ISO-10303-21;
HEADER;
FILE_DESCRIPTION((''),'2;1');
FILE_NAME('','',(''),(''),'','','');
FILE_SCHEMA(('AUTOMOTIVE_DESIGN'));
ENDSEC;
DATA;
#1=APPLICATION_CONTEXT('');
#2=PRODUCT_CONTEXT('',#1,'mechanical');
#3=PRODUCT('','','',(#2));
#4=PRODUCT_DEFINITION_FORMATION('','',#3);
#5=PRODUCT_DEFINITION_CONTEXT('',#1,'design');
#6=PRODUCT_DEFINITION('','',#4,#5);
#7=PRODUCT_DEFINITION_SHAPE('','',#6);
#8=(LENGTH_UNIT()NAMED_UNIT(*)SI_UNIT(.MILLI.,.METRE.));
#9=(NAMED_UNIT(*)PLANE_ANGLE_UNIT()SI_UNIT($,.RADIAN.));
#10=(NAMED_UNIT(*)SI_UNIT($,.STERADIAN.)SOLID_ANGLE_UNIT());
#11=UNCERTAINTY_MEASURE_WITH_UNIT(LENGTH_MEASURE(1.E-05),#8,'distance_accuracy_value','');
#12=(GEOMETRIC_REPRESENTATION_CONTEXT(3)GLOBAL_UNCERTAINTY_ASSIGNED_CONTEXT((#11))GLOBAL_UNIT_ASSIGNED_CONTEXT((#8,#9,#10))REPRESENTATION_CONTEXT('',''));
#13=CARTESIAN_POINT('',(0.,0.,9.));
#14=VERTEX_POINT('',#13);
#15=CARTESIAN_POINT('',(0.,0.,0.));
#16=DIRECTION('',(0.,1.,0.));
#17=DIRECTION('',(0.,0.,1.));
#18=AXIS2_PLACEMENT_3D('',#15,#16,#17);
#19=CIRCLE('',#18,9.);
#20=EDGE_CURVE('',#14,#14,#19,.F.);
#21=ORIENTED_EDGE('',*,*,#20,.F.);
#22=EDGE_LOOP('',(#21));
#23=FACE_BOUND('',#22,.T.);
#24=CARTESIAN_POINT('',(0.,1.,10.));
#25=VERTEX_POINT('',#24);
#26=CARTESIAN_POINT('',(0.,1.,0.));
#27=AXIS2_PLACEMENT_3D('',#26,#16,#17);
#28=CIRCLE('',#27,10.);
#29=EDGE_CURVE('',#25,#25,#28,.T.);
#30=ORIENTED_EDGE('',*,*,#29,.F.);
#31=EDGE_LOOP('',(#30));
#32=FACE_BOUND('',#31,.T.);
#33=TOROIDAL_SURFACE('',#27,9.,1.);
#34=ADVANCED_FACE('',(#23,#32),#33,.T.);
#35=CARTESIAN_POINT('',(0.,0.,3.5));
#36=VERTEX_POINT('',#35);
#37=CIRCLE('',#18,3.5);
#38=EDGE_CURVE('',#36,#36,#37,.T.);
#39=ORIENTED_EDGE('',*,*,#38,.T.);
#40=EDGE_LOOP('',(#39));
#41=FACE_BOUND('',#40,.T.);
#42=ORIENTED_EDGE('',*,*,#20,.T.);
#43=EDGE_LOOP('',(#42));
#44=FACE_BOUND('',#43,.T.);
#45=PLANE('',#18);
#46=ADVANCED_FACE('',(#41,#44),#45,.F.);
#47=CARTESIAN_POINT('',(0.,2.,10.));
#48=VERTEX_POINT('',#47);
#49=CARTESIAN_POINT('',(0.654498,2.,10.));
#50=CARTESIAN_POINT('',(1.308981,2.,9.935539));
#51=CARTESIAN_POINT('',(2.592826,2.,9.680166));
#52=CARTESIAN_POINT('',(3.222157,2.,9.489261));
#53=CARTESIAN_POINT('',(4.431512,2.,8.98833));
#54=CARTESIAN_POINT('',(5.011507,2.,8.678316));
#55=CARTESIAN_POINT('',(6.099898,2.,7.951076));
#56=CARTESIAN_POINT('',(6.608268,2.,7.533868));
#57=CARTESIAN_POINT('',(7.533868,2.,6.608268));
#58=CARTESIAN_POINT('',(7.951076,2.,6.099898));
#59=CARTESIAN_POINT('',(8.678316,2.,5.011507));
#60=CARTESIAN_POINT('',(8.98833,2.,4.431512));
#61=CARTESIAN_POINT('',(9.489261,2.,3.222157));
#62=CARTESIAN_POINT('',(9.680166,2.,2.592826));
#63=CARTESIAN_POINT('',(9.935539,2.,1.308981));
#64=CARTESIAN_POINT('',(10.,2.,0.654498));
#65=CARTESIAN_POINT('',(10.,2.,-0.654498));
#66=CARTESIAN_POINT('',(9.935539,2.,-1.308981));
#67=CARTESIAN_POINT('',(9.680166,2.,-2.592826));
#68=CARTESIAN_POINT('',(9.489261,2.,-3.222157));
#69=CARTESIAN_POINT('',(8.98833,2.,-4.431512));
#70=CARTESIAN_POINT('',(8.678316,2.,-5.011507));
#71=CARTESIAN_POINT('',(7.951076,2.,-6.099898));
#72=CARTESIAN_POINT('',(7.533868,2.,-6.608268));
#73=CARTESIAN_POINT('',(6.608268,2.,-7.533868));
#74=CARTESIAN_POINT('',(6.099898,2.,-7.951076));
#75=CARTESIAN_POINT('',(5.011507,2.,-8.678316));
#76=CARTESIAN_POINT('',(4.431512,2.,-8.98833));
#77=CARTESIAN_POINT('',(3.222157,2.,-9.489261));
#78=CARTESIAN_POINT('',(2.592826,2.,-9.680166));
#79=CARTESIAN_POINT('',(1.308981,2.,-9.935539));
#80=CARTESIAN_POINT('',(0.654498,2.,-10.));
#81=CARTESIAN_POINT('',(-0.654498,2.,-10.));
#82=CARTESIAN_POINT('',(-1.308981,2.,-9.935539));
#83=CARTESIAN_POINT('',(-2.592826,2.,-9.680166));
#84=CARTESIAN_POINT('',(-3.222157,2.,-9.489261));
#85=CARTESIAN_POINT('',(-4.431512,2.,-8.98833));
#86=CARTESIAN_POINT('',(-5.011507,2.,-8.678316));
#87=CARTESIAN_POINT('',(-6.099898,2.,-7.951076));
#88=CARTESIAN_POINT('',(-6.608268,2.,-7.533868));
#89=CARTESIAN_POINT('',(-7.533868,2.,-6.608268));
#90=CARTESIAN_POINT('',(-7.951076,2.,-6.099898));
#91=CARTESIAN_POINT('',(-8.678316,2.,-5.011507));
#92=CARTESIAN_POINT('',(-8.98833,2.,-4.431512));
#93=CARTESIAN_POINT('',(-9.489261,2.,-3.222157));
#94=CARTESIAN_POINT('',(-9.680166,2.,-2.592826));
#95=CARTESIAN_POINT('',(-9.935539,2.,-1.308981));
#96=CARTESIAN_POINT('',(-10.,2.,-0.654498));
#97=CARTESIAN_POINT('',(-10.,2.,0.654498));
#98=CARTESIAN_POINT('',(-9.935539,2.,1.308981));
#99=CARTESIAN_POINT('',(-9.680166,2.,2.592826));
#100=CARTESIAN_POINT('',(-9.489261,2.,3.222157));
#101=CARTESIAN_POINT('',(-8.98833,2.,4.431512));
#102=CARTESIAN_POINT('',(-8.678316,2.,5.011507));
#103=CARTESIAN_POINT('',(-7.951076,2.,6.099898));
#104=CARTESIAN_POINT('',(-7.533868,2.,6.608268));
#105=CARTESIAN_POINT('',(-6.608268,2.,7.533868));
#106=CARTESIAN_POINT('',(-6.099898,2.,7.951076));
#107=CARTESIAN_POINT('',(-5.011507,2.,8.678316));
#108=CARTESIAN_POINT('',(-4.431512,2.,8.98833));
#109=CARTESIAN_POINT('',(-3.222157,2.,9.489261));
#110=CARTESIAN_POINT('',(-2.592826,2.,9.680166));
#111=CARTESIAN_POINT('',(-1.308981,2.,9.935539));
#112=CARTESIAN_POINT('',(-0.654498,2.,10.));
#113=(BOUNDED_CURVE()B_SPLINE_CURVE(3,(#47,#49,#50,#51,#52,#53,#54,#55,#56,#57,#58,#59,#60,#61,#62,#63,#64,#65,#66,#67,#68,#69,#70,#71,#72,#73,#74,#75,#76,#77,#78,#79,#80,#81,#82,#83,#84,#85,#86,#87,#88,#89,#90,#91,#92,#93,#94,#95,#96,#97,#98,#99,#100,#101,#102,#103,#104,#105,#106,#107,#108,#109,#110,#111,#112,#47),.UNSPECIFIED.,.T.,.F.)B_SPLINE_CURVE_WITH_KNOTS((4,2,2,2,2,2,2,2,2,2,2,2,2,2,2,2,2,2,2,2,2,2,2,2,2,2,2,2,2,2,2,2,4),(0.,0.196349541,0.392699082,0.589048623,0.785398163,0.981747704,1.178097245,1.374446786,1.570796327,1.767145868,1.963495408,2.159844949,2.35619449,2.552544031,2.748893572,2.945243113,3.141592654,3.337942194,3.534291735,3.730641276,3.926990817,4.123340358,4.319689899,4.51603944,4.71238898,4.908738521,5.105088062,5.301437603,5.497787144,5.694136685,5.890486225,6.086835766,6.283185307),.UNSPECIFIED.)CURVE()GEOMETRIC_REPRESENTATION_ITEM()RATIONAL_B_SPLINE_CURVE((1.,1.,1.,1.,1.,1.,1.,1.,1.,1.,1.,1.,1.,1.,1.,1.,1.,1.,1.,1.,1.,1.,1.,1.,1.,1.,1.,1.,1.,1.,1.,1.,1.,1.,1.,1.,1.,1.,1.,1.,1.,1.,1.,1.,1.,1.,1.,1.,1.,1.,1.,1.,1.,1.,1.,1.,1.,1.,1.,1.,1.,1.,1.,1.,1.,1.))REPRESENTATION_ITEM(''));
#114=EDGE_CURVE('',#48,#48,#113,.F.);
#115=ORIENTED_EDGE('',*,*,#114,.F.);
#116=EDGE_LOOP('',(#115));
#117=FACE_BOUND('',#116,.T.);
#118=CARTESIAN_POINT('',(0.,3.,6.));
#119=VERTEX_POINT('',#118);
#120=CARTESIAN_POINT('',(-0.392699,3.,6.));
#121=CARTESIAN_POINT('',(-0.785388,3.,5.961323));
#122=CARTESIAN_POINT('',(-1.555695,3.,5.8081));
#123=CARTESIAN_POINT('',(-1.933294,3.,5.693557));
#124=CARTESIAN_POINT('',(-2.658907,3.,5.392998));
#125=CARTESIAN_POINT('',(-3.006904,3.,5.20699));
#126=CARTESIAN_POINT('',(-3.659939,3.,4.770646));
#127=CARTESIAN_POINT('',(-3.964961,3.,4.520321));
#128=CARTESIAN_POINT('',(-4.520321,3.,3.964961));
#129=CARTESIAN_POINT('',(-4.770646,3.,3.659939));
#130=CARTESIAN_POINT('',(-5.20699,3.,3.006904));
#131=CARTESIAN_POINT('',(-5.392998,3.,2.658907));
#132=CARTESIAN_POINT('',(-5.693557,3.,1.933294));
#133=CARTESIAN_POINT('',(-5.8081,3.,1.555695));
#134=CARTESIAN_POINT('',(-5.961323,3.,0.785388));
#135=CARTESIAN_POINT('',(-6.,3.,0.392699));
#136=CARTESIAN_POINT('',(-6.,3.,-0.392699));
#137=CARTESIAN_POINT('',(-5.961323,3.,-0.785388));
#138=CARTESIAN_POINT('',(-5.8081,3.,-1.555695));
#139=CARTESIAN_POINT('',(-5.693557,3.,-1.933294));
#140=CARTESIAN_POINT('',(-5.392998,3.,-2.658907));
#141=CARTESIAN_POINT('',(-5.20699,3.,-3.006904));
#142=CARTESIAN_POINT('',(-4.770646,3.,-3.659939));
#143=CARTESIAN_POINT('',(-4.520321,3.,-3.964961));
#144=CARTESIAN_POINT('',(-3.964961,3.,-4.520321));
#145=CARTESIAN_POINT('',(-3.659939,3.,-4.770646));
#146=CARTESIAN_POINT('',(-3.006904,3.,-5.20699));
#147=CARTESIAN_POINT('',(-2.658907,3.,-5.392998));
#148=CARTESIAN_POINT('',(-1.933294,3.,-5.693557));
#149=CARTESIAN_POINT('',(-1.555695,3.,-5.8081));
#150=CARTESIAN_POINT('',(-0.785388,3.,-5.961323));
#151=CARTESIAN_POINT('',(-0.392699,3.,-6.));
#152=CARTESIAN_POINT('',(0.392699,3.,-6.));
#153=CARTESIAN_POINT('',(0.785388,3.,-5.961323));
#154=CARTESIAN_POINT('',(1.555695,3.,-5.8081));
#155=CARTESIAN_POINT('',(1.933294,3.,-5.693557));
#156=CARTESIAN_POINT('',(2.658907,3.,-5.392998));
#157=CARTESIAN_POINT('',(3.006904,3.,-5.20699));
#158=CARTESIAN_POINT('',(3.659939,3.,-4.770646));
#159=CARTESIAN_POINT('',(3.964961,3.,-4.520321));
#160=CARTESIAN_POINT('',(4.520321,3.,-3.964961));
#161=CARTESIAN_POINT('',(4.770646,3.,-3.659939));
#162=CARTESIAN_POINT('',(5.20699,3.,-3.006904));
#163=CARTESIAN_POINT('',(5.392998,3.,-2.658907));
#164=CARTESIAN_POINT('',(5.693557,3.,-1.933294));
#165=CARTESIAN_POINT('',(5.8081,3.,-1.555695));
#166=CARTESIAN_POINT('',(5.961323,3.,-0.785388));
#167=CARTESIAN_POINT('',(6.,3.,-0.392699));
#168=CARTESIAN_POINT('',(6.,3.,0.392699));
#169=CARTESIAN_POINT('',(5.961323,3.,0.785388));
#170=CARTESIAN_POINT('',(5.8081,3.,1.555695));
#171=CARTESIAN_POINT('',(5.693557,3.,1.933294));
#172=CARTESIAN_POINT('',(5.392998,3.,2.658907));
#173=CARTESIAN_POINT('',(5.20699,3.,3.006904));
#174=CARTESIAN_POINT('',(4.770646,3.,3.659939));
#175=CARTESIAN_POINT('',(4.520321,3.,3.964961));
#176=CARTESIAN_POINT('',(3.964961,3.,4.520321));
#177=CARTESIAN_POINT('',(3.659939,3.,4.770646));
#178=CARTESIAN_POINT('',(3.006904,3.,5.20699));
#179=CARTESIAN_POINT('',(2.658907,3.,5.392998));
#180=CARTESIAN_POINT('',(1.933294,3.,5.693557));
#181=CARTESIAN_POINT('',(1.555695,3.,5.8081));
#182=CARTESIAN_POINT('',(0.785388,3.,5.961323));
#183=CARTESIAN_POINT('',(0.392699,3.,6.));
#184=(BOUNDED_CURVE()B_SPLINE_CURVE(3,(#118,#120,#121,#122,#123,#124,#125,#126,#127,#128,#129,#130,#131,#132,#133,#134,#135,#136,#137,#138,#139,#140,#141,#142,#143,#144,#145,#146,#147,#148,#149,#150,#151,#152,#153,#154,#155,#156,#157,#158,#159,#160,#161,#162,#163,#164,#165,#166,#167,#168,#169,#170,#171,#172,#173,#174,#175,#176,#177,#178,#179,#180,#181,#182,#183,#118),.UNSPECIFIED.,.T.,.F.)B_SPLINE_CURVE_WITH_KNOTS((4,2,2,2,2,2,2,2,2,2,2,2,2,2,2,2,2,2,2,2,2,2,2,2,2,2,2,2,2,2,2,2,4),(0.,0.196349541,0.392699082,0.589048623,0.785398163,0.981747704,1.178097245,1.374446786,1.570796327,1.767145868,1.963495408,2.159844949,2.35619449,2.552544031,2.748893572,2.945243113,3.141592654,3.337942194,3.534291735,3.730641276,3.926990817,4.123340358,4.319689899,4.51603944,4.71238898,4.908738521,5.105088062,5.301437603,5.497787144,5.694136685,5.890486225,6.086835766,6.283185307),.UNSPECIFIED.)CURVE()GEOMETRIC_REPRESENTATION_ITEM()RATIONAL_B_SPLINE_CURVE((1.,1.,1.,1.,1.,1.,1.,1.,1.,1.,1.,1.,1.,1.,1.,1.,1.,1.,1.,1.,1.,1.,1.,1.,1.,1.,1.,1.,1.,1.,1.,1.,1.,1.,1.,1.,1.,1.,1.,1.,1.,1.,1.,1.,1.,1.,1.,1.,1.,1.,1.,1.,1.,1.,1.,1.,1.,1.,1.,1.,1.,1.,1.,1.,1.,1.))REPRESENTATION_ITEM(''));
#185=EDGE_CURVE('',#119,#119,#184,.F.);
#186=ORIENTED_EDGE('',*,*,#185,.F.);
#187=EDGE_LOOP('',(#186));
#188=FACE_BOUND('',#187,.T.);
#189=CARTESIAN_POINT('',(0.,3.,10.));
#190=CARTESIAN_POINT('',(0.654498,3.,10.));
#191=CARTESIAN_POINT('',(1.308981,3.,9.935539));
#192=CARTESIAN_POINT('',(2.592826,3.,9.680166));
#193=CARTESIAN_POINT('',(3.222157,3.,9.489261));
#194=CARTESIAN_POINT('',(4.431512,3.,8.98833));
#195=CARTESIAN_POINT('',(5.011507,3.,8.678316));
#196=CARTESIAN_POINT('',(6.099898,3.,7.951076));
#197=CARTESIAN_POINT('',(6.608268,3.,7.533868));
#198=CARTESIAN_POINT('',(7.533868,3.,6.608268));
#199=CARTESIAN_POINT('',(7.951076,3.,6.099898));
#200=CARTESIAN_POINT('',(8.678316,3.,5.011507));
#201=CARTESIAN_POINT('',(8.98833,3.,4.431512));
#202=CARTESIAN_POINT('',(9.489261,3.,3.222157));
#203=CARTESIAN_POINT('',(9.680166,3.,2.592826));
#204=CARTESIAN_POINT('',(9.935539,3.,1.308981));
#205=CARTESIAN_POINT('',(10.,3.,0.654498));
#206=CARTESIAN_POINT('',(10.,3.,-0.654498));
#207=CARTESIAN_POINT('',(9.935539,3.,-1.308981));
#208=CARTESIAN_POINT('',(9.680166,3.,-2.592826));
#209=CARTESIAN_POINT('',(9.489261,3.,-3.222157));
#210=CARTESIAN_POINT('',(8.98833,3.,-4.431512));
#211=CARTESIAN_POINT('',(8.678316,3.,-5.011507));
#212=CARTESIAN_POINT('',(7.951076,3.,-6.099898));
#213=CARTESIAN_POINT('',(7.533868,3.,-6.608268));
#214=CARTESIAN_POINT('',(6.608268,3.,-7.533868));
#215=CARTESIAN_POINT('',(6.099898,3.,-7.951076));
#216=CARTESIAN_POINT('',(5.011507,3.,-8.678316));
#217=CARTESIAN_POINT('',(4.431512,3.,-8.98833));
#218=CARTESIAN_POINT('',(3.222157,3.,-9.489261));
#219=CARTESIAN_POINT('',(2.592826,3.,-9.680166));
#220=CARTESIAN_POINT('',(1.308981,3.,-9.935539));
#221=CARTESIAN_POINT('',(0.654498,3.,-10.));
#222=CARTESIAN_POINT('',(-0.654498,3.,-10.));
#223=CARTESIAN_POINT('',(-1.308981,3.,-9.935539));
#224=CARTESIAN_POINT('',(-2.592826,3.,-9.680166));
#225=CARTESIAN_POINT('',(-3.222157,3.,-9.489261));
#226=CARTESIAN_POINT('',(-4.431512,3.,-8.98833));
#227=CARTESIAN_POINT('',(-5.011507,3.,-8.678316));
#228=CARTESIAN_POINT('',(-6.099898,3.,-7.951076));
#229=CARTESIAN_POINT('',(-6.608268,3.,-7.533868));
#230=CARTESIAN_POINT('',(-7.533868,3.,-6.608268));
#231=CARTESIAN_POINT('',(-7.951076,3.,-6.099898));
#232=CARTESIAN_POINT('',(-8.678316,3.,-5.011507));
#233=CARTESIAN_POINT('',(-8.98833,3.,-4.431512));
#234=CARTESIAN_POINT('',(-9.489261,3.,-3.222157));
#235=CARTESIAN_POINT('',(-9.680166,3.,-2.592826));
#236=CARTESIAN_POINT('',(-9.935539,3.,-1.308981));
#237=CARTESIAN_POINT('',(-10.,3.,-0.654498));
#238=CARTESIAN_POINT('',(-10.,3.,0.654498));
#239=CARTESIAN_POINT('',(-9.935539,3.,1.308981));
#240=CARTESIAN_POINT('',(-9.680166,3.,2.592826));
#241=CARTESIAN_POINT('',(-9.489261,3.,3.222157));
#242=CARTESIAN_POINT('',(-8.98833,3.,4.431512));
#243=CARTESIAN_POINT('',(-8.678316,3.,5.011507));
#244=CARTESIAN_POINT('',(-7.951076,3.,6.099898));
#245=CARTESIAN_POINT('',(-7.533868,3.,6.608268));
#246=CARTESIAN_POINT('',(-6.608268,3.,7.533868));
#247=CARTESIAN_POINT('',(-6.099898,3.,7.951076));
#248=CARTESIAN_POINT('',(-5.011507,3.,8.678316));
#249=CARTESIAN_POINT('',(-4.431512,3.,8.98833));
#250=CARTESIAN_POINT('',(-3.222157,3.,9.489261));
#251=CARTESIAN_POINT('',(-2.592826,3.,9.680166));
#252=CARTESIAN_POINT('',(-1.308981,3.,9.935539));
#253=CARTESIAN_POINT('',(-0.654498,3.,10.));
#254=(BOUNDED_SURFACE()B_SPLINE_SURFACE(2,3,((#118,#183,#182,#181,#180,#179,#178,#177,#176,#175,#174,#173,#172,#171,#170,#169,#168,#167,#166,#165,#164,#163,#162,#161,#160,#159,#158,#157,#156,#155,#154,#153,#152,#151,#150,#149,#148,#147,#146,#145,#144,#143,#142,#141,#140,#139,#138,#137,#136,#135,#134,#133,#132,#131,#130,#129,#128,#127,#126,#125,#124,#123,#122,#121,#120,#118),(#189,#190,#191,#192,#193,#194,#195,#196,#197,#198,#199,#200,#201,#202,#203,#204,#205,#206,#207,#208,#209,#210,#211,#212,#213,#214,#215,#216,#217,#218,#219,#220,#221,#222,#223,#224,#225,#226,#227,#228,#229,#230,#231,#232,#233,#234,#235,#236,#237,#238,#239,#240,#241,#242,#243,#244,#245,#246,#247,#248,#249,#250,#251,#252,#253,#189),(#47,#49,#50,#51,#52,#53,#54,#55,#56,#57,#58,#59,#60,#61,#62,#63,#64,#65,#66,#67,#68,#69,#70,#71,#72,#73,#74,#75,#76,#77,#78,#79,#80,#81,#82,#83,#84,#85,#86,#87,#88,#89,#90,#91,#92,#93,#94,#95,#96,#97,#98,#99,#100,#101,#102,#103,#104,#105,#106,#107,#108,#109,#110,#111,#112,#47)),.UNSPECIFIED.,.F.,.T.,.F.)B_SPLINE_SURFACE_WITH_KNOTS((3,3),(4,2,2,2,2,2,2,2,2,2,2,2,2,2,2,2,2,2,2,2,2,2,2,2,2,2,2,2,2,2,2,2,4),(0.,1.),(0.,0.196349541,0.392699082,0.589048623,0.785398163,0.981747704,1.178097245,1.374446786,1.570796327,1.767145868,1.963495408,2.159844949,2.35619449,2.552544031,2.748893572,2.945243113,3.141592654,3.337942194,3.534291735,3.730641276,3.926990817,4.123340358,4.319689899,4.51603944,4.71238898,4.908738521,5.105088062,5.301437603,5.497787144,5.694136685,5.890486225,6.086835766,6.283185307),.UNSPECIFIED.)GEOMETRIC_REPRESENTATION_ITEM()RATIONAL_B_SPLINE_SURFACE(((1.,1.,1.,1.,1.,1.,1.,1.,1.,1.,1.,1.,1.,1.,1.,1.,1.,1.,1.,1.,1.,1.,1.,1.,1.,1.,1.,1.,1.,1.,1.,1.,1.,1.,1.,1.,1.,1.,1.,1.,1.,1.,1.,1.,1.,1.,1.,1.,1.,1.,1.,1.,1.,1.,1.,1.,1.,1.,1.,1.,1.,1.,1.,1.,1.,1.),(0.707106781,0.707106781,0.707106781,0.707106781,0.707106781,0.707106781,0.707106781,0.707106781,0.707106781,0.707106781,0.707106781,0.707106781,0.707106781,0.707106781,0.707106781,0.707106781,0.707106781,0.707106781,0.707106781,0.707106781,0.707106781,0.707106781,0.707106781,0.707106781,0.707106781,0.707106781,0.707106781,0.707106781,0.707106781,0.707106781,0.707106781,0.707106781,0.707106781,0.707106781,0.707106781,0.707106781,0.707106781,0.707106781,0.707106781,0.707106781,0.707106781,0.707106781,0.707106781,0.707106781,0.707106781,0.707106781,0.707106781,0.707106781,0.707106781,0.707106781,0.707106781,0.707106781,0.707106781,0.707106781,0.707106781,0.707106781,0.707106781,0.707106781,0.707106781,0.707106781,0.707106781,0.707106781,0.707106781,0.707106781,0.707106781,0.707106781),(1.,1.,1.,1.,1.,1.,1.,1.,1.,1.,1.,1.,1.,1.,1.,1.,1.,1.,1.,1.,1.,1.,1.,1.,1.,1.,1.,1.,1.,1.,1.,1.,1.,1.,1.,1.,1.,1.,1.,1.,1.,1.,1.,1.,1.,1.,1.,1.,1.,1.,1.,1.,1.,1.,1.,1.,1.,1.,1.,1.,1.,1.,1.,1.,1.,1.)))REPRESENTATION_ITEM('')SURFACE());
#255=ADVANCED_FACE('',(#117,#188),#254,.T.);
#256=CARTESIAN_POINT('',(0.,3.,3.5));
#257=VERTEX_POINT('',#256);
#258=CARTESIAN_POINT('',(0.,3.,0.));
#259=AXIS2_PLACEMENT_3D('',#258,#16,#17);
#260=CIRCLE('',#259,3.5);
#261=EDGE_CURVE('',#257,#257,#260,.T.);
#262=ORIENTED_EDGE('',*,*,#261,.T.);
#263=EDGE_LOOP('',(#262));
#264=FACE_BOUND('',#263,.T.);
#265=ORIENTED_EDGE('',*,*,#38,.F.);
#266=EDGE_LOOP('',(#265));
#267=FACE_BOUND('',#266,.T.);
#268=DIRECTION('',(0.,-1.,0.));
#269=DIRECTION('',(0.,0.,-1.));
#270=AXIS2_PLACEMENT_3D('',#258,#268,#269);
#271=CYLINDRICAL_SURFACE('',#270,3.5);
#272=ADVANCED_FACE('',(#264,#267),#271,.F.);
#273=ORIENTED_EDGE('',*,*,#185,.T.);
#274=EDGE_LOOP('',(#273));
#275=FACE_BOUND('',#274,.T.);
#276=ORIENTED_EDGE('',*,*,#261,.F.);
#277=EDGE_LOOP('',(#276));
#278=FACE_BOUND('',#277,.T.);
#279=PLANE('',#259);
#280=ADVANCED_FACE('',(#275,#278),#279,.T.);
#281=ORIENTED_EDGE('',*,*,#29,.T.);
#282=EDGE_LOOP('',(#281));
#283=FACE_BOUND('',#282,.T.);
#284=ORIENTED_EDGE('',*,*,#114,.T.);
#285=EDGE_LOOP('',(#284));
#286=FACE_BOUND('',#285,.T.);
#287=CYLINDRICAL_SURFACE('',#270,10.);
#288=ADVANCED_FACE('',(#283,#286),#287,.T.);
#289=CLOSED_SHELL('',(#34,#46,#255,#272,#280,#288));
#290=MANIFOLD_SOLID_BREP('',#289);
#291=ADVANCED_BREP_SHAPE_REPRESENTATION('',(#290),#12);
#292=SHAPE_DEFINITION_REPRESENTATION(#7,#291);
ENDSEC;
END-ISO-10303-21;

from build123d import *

# Parameters (mm, degrees)
SKETCH1_R           = 10
SKETCH1_R_2         = 3.5
BOSS_EXTRUDE1_DEPTH = 3
FILLET1_SIZE        = 1
FILLET1_SIZE_2      = 4
FILLET2_R           = 1


with BuildPart() as part:
    # Sketch1 → Boss-Extrude1 (new body)
    with BuildSketch(Plane(origin=(0, 0, 0), x_dir=(1, 0, 0), z_dir=(0, 1, 0))):
        with Locations(Location((0, 0, 0), (0, 0, 270))):
            Circle(SKETCH1_R)
        with Locations(Location((0, 0, 0), (0, 0, 270))):
            Circle(SKETCH1_R_2, mode=Mode.SUBTRACT)
    extrude(amount=BOSS_EXTRUDE1_DEPTH)

    # Fillet1
    # an asymmetric fillet: 4, 1 mm, written as the material it takes off along each edge
    with BuildSketch(Plane(origin=(0, 3, 0), x_dir=(0, 0, 1), z_dir=(-1, 0, 0))) as fillet1_piece_1:
        with BuildLine():
            Bezier((10, -FILLET1_SIZE), (10, 0), (10 - FILLET1_SIZE_2, 0), weights=[1, 0.707106781, 1])
            Line((10 - FILLET1_SIZE_2, 0), (10, 0))
            Line((10, 0), (10, -FILLET1_SIZE))
        make_face()
    revolve(axis=Axis((0, 3, 0), (0, 1, 0)), mode=Mode.SUBTRACT)

    # Fillet2
    fillet2_edges = [part.edges().sort_by_distance(p)[0] for p in [
        (0, 0, -10),
    ]]
    fillet(fillet2_edges, radius=FILLET2_R)


solid = part.part
